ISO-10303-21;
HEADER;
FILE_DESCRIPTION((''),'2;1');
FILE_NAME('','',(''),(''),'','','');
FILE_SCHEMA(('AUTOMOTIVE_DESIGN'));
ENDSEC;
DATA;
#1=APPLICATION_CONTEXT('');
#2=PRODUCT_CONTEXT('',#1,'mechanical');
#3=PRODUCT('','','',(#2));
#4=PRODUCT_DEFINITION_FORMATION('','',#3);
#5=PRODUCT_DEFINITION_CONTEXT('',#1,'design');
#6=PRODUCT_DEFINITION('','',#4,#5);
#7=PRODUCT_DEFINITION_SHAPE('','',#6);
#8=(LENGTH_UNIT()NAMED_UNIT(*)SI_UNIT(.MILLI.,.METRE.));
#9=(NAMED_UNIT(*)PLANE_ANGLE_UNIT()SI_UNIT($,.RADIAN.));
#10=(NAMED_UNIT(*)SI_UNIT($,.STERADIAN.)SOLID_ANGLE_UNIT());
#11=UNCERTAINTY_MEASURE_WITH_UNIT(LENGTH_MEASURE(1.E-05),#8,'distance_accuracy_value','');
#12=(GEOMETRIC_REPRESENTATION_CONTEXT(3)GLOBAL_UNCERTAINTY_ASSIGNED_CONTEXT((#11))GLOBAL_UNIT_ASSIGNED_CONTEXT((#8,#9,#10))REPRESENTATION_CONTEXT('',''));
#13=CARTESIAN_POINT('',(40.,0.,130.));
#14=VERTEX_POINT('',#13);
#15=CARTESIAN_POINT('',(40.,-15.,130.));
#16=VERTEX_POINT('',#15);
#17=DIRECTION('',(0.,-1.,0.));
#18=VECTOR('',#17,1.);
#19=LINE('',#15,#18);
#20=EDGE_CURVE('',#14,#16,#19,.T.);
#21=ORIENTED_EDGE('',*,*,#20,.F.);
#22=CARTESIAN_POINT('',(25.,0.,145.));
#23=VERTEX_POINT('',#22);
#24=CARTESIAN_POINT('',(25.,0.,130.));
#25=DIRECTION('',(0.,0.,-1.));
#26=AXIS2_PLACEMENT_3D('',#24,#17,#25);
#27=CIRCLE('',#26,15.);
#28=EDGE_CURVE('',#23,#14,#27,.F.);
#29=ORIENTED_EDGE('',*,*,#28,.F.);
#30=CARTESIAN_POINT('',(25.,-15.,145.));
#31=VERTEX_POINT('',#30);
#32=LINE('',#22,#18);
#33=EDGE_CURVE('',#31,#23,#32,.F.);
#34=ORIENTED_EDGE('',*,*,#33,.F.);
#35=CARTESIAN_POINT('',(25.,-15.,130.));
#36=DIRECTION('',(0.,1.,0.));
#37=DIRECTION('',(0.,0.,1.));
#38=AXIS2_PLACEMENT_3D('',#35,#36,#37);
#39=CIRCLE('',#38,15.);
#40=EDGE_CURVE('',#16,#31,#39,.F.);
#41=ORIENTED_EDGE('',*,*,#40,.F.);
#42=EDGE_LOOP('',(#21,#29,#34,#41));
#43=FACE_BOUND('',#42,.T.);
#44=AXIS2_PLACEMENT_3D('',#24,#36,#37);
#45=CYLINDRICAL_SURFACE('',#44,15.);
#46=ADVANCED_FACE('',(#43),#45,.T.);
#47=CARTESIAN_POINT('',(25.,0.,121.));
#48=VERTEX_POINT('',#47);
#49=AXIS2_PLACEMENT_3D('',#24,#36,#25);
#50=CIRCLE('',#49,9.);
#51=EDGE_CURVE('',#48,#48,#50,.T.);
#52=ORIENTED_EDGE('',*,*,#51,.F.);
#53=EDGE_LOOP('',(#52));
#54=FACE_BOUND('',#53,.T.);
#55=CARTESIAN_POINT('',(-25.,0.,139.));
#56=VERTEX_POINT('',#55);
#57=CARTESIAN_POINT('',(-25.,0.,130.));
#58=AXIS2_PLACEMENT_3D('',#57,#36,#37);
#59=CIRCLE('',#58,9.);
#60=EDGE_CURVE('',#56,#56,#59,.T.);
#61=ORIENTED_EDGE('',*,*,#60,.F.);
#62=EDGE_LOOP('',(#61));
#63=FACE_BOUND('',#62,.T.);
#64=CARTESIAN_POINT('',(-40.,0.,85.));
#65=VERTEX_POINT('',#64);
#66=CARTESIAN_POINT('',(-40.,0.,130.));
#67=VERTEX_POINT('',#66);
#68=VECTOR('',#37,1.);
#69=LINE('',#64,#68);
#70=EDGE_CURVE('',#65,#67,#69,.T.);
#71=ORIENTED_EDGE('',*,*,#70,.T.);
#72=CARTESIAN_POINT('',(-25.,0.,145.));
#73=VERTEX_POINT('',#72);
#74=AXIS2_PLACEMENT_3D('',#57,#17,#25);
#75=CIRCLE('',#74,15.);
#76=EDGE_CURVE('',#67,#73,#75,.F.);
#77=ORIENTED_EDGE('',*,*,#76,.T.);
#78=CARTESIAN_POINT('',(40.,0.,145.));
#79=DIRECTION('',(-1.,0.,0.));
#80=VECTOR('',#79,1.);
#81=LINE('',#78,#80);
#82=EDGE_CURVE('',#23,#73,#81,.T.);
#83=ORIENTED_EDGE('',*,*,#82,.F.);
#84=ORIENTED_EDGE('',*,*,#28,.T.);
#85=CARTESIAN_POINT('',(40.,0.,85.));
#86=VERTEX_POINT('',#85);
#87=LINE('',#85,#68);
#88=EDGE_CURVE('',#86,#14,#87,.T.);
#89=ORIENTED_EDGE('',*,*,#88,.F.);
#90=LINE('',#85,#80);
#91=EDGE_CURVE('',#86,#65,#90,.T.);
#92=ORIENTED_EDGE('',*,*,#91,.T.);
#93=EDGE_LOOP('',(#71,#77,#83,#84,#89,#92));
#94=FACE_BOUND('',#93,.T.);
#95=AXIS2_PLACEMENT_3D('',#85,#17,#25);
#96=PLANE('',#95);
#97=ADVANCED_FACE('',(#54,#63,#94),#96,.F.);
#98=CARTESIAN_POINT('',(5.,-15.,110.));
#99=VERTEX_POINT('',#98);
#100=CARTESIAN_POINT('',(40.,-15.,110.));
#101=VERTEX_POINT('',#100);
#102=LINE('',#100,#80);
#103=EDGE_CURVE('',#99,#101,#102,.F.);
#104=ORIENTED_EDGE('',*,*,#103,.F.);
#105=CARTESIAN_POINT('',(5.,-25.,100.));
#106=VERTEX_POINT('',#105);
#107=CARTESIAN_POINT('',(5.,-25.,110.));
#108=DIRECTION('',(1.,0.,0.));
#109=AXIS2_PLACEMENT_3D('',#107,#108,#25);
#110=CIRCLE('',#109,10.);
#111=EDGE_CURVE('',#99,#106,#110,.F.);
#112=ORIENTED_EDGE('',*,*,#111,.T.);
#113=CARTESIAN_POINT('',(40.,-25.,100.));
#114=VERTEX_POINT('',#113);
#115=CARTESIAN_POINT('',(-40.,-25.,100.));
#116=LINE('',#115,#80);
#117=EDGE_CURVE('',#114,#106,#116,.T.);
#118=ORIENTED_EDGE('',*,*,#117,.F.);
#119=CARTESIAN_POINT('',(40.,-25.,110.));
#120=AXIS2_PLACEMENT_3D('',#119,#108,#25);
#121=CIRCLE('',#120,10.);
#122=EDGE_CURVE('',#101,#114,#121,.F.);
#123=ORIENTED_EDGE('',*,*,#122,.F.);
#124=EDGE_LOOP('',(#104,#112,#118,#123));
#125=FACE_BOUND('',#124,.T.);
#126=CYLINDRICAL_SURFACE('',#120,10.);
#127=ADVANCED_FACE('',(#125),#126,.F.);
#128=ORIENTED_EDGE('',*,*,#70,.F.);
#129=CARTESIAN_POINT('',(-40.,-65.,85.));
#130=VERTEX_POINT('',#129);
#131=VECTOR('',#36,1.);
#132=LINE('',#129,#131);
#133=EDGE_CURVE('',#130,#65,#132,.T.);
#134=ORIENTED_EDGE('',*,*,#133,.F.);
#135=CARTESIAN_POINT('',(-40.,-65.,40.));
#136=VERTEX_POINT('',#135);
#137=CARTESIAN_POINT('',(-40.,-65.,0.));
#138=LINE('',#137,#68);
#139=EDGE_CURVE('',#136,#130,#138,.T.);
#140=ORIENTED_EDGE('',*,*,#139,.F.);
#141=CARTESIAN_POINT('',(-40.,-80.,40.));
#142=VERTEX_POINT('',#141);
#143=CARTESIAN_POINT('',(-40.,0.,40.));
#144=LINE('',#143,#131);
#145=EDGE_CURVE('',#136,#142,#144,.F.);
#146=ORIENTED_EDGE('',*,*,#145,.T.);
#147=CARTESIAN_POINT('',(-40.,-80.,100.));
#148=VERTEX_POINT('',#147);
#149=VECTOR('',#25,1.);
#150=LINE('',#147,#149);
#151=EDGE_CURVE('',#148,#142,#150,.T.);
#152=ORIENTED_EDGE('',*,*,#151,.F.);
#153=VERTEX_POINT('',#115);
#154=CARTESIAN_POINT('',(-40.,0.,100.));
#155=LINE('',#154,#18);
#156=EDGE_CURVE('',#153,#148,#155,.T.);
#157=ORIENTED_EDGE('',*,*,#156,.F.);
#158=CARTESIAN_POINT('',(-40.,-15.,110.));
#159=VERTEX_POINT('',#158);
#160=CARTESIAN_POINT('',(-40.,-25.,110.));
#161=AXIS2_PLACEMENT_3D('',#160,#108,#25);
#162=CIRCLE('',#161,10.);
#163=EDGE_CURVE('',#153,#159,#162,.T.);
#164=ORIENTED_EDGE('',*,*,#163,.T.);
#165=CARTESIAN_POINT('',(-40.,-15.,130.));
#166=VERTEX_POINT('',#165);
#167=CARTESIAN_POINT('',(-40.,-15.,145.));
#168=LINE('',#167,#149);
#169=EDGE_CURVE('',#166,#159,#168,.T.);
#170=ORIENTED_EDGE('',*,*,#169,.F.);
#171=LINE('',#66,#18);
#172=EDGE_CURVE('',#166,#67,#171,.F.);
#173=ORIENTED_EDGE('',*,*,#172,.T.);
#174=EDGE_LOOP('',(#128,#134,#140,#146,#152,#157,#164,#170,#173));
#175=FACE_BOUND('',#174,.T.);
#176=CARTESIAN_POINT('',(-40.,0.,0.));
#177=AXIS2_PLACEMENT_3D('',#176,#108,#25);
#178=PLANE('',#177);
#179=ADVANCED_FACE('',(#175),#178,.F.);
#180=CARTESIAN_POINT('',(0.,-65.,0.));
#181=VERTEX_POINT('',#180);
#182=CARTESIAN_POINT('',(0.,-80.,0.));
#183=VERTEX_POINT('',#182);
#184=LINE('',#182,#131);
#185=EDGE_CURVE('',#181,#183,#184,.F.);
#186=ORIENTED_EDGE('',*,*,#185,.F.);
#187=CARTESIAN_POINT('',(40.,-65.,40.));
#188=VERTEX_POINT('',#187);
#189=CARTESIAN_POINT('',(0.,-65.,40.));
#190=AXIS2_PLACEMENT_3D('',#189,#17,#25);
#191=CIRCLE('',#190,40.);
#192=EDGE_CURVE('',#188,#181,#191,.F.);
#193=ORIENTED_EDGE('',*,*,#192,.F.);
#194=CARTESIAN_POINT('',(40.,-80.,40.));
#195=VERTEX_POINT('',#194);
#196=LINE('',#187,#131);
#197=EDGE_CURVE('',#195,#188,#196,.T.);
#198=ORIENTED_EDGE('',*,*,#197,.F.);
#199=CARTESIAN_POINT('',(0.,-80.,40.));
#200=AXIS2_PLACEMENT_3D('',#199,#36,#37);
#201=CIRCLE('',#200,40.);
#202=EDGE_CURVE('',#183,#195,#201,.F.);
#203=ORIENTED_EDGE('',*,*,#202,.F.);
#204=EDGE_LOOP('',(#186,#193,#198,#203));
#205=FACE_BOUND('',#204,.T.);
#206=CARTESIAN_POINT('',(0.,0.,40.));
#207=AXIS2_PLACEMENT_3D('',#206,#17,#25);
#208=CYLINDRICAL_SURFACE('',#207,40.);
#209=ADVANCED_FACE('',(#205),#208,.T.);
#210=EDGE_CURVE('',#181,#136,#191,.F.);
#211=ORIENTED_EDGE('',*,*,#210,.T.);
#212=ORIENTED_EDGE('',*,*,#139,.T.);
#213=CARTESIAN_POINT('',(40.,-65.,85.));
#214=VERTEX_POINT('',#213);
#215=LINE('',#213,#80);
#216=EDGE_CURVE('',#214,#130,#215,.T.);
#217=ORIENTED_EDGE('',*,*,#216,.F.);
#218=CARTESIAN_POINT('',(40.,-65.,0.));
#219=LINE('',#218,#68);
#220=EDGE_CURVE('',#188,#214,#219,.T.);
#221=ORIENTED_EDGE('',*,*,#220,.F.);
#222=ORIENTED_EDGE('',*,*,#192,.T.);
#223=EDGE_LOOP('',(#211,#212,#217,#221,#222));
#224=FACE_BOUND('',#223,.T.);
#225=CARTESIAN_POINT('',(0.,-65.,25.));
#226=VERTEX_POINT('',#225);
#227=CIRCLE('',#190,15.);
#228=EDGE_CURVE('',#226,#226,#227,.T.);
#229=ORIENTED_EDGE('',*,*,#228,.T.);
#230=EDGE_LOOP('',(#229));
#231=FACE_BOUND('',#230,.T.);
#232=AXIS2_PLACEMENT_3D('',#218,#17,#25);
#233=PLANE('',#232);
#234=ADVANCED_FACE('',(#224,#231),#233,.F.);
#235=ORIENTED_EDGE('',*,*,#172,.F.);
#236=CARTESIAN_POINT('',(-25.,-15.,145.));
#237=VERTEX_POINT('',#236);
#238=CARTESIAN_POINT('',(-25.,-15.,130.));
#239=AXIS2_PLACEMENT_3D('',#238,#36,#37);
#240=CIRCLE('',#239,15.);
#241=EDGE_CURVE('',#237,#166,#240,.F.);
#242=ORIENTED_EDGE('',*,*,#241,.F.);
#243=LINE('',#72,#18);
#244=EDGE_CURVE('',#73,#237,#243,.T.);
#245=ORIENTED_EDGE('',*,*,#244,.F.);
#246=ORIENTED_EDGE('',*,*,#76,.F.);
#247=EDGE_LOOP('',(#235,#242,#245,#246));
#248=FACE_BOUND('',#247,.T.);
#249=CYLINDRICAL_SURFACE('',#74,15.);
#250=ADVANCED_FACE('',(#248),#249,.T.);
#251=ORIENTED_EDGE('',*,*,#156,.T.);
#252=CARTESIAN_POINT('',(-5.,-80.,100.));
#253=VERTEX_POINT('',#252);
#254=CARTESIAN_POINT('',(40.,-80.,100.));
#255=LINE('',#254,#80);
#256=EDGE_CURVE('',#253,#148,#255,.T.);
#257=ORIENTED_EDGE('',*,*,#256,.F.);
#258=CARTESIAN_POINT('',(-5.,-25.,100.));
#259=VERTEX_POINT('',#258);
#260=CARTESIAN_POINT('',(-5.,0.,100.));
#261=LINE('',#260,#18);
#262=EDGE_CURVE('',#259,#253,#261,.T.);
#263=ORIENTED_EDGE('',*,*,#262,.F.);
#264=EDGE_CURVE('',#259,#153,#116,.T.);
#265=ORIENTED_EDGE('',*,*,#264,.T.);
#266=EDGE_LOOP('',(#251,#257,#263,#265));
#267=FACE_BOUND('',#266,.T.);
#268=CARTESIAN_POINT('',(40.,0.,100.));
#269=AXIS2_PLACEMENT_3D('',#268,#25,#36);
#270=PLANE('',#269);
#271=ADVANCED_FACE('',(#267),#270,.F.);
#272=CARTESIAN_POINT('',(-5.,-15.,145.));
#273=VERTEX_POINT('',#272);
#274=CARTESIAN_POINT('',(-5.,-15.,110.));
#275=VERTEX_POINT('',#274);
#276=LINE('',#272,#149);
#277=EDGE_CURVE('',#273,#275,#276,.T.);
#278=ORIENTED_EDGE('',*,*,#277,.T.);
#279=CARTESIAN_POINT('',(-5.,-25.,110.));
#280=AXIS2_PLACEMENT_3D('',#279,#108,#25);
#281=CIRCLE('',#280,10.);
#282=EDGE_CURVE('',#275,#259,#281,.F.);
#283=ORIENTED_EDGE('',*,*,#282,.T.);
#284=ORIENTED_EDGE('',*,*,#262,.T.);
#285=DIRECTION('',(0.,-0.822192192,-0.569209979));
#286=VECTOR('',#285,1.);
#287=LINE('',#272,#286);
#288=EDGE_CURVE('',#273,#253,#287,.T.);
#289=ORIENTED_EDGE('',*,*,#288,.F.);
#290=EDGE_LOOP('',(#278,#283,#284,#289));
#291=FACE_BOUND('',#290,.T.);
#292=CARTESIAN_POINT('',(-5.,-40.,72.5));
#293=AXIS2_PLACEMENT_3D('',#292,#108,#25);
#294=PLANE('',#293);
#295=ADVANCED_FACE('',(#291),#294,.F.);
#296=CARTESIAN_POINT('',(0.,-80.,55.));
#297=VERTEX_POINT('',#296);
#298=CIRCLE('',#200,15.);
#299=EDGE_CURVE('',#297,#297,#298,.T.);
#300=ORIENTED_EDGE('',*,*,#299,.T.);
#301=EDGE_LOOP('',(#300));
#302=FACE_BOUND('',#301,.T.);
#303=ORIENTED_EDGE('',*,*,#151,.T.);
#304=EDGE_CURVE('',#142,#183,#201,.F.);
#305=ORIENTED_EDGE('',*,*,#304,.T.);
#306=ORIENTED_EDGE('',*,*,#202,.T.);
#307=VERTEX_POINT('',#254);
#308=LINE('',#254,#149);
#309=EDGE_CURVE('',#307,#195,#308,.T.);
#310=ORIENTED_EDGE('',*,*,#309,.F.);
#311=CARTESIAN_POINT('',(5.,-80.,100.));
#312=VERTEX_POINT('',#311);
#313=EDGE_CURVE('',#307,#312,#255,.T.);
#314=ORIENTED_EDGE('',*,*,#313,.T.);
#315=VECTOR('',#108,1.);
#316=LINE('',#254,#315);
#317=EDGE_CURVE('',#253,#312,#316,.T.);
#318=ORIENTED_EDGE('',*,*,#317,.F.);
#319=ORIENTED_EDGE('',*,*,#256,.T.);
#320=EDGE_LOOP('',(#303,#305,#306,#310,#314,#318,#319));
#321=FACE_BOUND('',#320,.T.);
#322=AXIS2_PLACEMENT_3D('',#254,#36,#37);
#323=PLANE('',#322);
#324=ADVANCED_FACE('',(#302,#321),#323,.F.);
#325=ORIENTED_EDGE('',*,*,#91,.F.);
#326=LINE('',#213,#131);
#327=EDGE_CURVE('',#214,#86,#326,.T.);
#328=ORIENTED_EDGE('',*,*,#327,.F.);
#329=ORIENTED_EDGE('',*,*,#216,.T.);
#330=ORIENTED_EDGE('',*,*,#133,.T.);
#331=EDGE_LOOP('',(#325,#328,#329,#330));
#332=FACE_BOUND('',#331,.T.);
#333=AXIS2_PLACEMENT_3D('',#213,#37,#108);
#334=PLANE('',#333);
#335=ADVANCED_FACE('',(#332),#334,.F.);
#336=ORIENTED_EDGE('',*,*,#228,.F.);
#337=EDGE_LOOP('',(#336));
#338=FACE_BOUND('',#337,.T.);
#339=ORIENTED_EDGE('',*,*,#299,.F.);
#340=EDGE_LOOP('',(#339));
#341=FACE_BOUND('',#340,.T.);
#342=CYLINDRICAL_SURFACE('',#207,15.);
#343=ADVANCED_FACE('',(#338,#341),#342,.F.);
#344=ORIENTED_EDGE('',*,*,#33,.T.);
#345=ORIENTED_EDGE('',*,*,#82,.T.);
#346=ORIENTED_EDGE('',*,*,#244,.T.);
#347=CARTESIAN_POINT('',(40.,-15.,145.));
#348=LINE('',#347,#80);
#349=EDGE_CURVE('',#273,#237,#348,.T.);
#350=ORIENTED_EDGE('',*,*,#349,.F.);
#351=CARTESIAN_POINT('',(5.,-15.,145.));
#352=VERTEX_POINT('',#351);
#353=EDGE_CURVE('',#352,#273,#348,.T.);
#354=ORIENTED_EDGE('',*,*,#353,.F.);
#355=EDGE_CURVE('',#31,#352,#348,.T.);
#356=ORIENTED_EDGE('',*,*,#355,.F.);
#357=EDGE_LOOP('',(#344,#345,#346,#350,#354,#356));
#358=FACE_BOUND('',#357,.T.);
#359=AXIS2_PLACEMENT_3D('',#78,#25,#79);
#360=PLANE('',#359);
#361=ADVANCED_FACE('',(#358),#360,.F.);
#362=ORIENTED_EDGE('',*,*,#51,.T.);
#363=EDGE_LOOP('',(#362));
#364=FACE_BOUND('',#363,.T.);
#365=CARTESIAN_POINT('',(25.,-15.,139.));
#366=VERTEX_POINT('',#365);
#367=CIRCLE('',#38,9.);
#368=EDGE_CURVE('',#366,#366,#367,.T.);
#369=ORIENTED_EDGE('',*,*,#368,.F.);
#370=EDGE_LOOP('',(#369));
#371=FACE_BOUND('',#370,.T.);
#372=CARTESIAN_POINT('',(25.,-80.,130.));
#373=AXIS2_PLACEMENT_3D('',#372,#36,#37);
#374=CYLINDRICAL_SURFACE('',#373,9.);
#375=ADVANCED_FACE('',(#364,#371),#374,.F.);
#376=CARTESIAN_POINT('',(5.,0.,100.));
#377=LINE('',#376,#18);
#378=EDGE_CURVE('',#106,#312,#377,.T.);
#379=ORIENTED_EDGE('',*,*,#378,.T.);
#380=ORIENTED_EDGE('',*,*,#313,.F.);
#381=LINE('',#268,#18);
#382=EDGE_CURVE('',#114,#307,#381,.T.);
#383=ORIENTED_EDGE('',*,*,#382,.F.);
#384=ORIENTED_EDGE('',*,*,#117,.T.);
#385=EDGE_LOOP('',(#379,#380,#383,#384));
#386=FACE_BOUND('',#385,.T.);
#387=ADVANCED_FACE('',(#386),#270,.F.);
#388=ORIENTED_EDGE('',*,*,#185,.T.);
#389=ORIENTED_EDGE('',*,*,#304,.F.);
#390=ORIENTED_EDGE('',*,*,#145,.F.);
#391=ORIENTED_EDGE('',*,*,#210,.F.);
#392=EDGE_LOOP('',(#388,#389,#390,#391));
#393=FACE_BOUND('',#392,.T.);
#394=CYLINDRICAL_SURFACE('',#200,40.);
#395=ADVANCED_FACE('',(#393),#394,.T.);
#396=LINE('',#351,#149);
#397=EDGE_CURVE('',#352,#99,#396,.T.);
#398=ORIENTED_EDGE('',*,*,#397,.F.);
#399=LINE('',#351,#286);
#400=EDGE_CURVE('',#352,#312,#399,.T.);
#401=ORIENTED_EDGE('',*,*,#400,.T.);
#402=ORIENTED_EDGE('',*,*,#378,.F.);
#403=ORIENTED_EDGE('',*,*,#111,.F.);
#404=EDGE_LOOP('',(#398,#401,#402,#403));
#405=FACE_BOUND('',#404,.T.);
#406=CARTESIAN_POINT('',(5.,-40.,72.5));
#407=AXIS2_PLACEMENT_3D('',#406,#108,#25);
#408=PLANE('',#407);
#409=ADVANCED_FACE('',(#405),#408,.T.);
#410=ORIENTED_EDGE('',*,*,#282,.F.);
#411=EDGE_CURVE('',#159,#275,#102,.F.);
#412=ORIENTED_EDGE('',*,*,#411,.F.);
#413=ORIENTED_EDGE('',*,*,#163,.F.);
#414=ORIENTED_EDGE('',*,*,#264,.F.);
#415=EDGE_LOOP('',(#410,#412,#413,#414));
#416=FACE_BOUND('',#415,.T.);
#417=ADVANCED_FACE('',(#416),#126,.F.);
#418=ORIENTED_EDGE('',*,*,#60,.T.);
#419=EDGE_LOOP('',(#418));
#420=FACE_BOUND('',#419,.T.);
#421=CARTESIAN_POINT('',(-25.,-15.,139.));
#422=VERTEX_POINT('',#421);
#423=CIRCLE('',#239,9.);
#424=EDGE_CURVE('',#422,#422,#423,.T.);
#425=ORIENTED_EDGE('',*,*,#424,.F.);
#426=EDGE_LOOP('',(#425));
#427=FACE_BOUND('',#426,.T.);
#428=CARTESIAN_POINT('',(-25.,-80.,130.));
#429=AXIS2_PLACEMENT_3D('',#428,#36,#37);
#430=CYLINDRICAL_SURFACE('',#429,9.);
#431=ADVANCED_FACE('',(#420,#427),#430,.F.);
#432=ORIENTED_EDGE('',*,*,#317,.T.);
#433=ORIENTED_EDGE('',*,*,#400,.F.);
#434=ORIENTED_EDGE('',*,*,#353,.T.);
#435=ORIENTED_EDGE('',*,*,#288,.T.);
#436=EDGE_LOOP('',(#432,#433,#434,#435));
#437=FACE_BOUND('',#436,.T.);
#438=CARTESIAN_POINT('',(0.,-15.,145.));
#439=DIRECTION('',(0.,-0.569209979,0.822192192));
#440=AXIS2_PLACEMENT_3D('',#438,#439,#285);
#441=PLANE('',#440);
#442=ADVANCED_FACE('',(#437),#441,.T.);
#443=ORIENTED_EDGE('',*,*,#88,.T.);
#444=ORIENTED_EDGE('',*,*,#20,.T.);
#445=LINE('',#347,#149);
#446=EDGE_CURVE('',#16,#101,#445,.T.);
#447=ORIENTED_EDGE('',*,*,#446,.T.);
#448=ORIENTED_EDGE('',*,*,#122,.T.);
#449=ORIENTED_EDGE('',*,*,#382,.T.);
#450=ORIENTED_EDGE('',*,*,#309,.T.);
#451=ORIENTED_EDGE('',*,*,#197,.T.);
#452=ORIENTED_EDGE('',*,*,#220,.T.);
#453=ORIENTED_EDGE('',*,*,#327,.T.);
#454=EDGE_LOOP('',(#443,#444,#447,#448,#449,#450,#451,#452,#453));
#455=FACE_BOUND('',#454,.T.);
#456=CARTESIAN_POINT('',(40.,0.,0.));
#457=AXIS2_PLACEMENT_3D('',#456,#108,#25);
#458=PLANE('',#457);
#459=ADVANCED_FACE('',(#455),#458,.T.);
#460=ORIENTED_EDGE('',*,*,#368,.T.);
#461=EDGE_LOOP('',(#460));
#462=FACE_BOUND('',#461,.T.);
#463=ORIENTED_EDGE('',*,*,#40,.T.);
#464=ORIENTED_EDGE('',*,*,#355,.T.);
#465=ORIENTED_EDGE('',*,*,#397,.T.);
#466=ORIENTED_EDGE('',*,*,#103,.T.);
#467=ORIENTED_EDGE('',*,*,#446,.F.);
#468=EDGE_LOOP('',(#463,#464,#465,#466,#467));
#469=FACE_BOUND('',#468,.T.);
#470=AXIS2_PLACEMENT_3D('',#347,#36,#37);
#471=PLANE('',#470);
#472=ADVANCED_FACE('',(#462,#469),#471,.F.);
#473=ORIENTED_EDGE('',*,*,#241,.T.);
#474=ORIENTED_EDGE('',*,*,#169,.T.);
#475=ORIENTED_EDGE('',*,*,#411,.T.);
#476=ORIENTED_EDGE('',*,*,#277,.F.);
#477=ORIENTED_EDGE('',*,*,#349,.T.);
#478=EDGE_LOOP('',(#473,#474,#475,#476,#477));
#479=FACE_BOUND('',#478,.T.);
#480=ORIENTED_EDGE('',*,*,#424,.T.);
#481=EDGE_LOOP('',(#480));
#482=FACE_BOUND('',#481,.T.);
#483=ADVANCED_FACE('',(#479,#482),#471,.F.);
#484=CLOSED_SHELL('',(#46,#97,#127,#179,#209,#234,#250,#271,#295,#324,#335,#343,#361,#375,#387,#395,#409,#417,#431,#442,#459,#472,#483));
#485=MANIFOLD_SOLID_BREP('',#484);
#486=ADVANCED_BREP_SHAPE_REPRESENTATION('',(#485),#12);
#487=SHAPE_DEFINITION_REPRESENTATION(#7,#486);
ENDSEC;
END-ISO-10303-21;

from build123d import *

# Parameters (mm, degrees)
BOSS_EXTRUDE1_DEPTH     = 40
SKETCH2_W               = 15
SKETCH2_H               = 45
BOSS_EXTRUDE2_DEPTH     = 40
FILLET1_R               = 15
SKETCH9_R               = 9
CUT_EXTRUDE1_DEPTH      = 80
FILLET2_R               = 40
CUT_EXTRUDE6_DEPTH      = 171.367250374
CUT_EXTRUDE6_DEPTH_BACK = 171.367250374
SKETCH11_R              = 15
FILLET3_R               = 10
RIB17_REACH             = 172.367
SKETCH14_WALL_W         = 421.791442252
SKETCH14_WALL_H         = 10


with BuildPart() as part:
    # Sketch1 → Boss-Extrude1 (new, symmetric)
    with BuildSketch(Plane.YZ):
        Polygon((-65, 0), (-65, 85), (0, 85), (0, 100), (-80, 100), (-80, 0), align=None)
    extrude(amount=BOSS_EXTRUDE1_DEPTH, both=True)

    # Sketch2 → Boss-Extrude2 (add, symmetric)
    with BuildSketch(Plane.YZ):
        with Locations((-7.5, 122.5)):
            Rectangle(SKETCH2_W, SKETCH2_H)
    extrude(amount=BOSS_EXTRUDE2_DEPTH, both=True)

    # Fillet1
    fillet1_edges = [part.edges().sort_by_distance(p)[0] for p in [
        (-40, -7.5, 145),
        (40, -7.5, 145),
    ]]
    fillet(fillet1_edges, radius=FILLET1_R)

    # Sketch9 → Cut-Extrude1 (cut)
    with BuildSketch(Plane(origin=(0, 0, 0), x_dir=(-1, 0, 0), z_dir=(0, 1, 0))):
        with Locations(Location((25, 130, 0), (0, 0, 90))):
            Circle(SKETCH9_R)
        with Locations(Location((-25, 130, 0), (0, 0, 90))):
            Circle(SKETCH9_R)
    extrude(amount=-CUT_EXTRUDE1_DEPTH, mode=Mode.SUBTRACT)

    # Fillet2
    fillet2_edges = [part.edges().sort_by_distance(p)[0] for p in [
        (-40, -72.5, 0),
        (40, -72.5, 0),
    ]]
    fillet(fillet2_edges, radius=FILLET2_R - 0.0001)  # a hair under: the kernel refuses the full size

    # Sketch11 → Cut-Extrude6 (cut, two sides: drawn at the far end of the back side and taken through both)
    with BuildSketch(Plane.XZ.offset(80).offset(-CUT_EXTRUDE6_DEPTH_BACK)):
        with Locations(Location((0, 40, 0), (0, 0, 270))):
            Circle(SKETCH11_R)
    extrude(amount=CUT_EXTRUDE6_DEPTH + CUT_EXTRUDE6_DEPTH_BACK, mode=Mode.SUBTRACT)

    # Fillet3
    fillet3_edges = [part.edges().sort_by_distance(p)[0] for p in [
        (0, -15, 100),
    ]]
    fillet(fillet3_edges, radius=FILLET3_R)

    # Sketch14 wall → Rib17 (add, up to next)
    with BuildSketch(Plane(origin=(0, -47.5, 122.5), x_dir=(0, -0.822192191644, -0.56920997883), z_dir=(0, 0.56920997883, -0.822192191644)), mode=Mode.PRIVATE) as rib17_sk1:
        Rectangle(SKETCH14_WALL_W, SKETCH14_WALL_H)
    rib17_tool1 = extrude(rib17_sk1.sketch, amount=RIB17_REACH, mode=Mode.PRIVATE) - part.part
    add(rib17_tool1.solids().sort_by_distance((0, -47.5, 122.5))[0])


solid = part.part
